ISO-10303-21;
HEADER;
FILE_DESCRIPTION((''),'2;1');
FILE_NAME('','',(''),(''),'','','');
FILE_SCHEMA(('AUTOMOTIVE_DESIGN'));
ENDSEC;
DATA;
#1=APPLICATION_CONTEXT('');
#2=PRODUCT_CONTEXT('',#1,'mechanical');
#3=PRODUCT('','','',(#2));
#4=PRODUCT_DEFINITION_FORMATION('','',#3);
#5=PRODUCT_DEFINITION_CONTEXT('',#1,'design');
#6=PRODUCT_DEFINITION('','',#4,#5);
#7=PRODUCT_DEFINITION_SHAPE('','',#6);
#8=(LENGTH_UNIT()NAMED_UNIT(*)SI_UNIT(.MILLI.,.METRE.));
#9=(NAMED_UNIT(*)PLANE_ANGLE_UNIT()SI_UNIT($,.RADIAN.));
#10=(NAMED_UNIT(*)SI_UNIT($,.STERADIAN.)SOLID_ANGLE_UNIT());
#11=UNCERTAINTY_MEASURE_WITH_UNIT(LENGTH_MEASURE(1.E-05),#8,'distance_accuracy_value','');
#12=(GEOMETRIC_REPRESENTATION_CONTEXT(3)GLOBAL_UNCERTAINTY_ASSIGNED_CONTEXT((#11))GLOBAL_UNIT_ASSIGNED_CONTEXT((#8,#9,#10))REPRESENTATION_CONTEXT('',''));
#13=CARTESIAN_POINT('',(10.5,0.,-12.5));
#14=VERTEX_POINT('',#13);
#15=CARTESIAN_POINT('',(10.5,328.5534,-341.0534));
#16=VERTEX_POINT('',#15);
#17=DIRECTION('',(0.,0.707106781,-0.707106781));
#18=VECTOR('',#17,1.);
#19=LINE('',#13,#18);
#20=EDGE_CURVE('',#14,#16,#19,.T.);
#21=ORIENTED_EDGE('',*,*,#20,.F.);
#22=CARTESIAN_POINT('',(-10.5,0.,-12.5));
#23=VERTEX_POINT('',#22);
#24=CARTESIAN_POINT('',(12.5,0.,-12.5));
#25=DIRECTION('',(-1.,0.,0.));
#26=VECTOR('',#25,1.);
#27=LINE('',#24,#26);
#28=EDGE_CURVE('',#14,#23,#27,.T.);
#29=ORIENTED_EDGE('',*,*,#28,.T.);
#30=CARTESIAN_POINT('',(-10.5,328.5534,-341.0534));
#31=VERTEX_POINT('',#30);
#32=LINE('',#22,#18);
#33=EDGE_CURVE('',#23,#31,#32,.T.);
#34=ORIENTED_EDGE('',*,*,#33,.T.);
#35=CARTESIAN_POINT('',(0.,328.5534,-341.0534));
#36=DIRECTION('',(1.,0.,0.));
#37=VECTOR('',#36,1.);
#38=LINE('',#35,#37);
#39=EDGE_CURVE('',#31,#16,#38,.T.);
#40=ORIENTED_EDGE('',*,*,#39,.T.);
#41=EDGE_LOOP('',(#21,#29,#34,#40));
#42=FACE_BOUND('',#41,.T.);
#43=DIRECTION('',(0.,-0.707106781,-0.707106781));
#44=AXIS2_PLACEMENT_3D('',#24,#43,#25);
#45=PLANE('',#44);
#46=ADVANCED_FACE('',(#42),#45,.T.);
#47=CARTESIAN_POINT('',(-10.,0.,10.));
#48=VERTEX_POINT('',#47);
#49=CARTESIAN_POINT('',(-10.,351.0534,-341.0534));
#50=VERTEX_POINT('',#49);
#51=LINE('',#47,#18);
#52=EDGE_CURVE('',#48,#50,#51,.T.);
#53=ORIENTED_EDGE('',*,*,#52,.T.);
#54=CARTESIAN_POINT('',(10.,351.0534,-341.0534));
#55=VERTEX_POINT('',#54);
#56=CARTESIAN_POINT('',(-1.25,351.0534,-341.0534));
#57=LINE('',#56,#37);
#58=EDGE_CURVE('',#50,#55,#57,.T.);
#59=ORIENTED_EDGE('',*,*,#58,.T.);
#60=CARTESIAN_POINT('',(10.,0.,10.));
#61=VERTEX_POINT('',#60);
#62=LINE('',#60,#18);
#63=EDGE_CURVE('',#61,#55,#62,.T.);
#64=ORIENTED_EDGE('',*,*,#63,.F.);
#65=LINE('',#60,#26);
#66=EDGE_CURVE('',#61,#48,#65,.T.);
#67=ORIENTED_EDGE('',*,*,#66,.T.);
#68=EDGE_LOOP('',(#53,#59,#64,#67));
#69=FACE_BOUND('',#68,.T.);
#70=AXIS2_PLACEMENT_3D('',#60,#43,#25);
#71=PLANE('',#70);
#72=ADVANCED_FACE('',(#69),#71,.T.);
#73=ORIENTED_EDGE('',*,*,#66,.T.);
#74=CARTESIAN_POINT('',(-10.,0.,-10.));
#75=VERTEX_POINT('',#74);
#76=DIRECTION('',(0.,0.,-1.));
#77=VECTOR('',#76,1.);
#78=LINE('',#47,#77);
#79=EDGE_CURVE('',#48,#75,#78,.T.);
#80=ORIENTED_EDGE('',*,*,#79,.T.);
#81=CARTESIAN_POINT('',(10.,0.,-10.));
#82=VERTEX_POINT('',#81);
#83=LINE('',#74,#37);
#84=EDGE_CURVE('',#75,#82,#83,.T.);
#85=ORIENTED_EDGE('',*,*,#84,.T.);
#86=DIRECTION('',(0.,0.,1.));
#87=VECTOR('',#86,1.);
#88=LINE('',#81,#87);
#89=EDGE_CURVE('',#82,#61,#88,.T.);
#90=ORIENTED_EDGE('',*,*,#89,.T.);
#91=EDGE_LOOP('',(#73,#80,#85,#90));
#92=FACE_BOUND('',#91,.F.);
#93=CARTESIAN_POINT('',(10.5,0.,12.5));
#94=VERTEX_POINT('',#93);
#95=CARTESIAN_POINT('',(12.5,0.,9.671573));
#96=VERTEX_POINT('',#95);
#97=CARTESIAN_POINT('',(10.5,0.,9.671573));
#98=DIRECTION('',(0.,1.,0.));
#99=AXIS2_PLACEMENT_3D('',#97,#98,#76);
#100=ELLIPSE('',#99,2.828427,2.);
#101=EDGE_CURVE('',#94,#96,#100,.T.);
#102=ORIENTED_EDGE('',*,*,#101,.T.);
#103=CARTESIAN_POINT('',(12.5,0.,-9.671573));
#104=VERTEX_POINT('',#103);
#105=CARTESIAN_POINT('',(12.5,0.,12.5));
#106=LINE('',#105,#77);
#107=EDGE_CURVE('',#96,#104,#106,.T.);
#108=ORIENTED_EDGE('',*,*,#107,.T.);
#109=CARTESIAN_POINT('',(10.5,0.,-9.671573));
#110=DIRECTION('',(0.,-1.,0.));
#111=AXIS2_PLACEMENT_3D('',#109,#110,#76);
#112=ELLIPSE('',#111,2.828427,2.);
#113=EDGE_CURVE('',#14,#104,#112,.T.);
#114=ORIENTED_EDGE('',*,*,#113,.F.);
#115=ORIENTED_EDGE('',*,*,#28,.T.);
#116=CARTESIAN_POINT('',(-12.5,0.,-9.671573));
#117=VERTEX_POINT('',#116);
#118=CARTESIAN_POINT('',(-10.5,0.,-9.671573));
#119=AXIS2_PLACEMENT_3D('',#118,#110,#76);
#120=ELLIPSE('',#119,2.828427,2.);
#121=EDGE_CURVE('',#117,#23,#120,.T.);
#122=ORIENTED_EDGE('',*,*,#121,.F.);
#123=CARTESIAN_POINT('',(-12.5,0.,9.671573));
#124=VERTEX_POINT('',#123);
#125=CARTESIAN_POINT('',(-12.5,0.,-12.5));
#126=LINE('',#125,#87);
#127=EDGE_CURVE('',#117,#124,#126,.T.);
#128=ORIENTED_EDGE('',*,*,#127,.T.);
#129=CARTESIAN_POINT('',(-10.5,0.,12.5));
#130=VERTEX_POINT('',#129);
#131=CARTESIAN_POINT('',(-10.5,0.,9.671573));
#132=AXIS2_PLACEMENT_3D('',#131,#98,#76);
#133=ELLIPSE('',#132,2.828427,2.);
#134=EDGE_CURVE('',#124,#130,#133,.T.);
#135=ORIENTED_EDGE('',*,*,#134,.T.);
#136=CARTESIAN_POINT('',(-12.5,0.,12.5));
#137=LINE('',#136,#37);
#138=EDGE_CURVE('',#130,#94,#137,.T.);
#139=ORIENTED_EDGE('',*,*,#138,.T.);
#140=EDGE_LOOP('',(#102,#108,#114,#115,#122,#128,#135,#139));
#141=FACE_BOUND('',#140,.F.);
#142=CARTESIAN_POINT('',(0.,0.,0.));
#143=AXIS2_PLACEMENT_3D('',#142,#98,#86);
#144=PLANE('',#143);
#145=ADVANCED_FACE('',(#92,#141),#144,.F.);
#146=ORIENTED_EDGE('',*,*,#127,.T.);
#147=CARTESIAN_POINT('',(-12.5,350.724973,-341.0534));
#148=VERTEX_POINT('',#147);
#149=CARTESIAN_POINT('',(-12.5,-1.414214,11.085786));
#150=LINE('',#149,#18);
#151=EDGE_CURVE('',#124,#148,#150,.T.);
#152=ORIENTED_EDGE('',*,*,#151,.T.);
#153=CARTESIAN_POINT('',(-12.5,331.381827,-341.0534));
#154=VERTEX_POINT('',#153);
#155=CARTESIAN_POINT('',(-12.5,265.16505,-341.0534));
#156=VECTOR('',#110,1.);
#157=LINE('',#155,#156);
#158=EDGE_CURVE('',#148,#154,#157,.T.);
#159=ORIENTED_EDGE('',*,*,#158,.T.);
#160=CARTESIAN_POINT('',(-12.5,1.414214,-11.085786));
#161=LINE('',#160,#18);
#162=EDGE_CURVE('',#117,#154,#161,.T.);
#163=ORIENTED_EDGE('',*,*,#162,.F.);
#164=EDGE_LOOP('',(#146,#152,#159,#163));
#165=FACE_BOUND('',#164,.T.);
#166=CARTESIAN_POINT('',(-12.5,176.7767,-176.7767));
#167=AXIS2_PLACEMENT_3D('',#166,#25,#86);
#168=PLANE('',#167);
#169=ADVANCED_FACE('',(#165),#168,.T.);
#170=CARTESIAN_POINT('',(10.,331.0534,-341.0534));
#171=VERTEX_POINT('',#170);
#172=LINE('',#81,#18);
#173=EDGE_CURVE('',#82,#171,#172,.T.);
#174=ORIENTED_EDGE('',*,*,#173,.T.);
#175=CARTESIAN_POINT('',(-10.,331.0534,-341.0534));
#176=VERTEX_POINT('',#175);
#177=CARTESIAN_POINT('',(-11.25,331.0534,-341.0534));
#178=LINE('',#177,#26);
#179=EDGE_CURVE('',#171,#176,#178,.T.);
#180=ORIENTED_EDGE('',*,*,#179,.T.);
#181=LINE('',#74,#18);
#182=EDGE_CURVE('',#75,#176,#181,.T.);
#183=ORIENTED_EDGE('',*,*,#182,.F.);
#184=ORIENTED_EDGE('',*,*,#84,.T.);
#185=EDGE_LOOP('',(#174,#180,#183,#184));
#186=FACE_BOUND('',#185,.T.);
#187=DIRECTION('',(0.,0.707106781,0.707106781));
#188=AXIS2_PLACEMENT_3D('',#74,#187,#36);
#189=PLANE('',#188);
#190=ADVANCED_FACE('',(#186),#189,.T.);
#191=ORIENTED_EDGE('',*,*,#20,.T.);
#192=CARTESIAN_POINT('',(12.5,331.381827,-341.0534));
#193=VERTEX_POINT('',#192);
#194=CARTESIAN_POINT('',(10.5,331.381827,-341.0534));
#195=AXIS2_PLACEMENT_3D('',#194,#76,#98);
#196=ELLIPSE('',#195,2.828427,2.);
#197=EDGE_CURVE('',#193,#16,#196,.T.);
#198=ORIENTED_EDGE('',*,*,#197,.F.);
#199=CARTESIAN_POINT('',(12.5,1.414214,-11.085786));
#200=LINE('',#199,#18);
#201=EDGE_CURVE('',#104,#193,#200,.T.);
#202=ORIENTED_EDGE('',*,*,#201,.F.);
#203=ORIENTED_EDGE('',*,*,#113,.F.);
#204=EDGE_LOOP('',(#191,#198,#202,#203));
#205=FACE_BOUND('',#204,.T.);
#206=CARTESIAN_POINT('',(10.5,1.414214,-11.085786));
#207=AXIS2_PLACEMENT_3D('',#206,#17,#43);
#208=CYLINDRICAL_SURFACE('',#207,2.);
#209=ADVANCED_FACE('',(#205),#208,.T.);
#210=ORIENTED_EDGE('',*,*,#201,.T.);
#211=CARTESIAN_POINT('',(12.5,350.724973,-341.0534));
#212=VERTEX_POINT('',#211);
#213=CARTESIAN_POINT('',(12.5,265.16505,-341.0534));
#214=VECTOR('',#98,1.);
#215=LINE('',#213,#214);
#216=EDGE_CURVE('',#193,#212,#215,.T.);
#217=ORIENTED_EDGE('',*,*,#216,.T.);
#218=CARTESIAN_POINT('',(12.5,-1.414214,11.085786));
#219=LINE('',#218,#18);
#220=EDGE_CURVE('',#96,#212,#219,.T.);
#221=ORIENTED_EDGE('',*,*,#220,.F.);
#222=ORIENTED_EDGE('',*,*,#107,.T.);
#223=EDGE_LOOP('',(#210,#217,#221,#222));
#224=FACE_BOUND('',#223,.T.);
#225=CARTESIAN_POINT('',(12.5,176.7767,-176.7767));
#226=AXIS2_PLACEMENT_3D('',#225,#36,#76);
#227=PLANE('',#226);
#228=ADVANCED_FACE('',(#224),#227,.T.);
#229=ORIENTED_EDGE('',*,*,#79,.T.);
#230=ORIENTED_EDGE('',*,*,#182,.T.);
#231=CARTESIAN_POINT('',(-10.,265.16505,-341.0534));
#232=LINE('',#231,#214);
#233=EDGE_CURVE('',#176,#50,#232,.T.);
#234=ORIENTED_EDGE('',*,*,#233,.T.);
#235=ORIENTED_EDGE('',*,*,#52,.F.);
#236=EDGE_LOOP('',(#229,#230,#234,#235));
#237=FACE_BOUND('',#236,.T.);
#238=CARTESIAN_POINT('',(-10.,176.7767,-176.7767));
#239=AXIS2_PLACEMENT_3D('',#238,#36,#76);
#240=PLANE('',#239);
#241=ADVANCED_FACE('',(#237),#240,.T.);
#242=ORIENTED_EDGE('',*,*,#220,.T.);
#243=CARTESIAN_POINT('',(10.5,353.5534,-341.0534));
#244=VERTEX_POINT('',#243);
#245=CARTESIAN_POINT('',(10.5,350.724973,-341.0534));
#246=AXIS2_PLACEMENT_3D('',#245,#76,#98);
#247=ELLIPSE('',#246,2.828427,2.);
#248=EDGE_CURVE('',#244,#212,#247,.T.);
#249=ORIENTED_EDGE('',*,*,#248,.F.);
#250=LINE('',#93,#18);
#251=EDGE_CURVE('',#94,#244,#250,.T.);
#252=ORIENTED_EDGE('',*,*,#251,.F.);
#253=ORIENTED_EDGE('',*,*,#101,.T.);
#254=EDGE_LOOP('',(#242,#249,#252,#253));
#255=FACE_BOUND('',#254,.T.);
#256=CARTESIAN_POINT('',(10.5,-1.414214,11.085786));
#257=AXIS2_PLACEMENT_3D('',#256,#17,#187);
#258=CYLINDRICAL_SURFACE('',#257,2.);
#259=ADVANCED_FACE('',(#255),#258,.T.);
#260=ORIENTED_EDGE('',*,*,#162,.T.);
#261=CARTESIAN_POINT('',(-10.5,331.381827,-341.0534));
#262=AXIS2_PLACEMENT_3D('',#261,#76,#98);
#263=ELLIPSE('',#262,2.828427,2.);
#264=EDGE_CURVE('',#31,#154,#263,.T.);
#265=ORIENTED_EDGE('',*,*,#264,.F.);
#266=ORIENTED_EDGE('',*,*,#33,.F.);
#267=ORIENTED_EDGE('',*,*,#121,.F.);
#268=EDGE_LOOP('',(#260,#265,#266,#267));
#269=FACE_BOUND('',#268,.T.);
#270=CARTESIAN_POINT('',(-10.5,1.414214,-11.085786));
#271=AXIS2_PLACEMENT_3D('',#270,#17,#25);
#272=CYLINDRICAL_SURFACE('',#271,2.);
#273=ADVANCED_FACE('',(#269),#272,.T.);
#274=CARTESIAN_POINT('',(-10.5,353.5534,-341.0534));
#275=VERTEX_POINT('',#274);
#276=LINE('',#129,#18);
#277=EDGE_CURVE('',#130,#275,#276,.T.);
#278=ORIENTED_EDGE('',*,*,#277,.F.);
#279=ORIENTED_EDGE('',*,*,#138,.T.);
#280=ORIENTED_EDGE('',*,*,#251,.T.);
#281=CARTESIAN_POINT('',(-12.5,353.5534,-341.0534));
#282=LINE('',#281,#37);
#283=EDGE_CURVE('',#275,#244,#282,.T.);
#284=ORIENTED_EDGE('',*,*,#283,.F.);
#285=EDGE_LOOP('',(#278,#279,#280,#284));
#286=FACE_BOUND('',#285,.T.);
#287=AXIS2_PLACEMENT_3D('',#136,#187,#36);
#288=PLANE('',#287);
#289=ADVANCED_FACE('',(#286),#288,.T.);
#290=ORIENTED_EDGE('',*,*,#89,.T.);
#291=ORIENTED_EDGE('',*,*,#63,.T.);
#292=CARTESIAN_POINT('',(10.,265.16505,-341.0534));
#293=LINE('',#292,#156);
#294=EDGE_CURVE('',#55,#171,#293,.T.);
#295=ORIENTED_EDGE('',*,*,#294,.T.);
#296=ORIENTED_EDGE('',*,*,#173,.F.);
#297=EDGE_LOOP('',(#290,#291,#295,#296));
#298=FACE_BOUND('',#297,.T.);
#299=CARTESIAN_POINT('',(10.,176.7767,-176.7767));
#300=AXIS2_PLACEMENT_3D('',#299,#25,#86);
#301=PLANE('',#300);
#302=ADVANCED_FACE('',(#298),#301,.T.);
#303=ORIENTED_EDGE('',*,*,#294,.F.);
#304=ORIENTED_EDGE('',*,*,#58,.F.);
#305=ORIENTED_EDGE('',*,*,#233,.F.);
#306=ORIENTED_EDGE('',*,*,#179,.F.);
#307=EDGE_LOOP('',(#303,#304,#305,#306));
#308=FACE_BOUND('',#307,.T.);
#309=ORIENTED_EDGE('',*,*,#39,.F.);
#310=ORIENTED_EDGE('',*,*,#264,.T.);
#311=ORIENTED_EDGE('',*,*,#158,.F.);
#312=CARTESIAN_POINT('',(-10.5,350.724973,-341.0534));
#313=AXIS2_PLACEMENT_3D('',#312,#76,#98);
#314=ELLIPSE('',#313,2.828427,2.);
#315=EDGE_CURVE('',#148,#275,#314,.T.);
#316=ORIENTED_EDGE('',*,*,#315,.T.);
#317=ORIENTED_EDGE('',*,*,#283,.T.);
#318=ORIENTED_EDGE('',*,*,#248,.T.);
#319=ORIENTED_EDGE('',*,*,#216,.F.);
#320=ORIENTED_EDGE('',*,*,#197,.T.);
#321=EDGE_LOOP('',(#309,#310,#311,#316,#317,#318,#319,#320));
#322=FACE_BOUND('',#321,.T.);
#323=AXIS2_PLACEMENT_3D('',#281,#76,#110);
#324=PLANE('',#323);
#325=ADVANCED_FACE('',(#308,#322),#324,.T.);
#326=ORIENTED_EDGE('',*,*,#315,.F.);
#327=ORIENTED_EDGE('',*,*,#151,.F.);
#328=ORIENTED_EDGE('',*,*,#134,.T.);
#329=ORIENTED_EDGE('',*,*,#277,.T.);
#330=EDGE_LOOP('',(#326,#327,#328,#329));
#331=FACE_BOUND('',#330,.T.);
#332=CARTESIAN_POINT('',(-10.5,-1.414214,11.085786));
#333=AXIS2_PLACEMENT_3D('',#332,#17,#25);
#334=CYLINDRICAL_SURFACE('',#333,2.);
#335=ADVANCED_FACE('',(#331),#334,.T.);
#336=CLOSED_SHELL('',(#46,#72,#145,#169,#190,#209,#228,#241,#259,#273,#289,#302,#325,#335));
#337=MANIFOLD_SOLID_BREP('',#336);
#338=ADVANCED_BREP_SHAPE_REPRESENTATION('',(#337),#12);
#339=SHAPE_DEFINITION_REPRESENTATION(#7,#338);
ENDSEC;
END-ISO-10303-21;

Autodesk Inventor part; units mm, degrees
ref_plane "YZ Plane" through (0, 0, 0) normal (1, 0, 0) x (0, 1, 0)
ref_plane "XZ Plane" through (0, 0, 0) normal (0, 1, 0) x (-1, 0, 0)
sketch "profile" plane through (0, 0, 0) normal (0, 1, 0) x (-1, 0, 0)
  line L0 (12.5, 12.5) -> (-12.5, 12.5)
  line L1 (-12.5, 12.5) -> (-12.5, -12.5)
  line L2 (-12.5, -12.5) -> (12.5, -12.5)
  line L3 (12.5, -12.5) -> (12.5, 12.5)
  line L4 (-10, -10) -> (-10, 10)
  line L5 (-10, 10) -> (10, 10)
  line L6 (10, 10) -> (10, -10)
  line L7 (10, -10) -> (-10, -10)
  point P0 (0, 0)
  dimension "d0" = 12.5
  dimension "d1" = 25
  dimension "d2" = 25
  dimension "d3" = 12.5
  dimension "d6" = 2.5
sketch3d "3D Sketch1"
  line L0 (0, 0, 0) -> (0, 353.5534, -353.5534)
  dimension "d4" = 500
  dimension "d5" = 45
sweep "Sweep1" add profiles "profile" path "3D Sketch1"
fillet "Fillet1" radius 2 4 edges at (-12.5, 176.7767, -189.2767) (-12.5, 176.7767, -164.2767) (12.5, 176.7767, -164.2767) (12.5, 176.7767, -189.2767)
ref_plane "mirrored45" through (-12.5, 353.5534, -341.0534) normal (0, 0, 1) x (1, 0, 0)
split "Split1" plane through (-12.5, 353.5534, -341.0534) removes the side toward (0, 0, -1)
equation "\"d0\" = 0.5 * d1"
equation "\"d1\" = width"
equation "\"d2\" = d1"
equation "\"d3\" = 0.5 * d2"
equation "\"d6\" = t"
equation "\"d4\" = L"
equation "\"d5\" = angleCut"
equation "\"d9\" = filletRadius"
equation "\"t\" = 2.5"
equation "\"filletRadius\" = 2"
equation "\"angleCut\" = 45deg"
equation "\"width\" = 25"
equation "\"a\" = 45"
equation "\"L\" = 500"
properties part number "support_truss" material "Steel, Galvanized"
